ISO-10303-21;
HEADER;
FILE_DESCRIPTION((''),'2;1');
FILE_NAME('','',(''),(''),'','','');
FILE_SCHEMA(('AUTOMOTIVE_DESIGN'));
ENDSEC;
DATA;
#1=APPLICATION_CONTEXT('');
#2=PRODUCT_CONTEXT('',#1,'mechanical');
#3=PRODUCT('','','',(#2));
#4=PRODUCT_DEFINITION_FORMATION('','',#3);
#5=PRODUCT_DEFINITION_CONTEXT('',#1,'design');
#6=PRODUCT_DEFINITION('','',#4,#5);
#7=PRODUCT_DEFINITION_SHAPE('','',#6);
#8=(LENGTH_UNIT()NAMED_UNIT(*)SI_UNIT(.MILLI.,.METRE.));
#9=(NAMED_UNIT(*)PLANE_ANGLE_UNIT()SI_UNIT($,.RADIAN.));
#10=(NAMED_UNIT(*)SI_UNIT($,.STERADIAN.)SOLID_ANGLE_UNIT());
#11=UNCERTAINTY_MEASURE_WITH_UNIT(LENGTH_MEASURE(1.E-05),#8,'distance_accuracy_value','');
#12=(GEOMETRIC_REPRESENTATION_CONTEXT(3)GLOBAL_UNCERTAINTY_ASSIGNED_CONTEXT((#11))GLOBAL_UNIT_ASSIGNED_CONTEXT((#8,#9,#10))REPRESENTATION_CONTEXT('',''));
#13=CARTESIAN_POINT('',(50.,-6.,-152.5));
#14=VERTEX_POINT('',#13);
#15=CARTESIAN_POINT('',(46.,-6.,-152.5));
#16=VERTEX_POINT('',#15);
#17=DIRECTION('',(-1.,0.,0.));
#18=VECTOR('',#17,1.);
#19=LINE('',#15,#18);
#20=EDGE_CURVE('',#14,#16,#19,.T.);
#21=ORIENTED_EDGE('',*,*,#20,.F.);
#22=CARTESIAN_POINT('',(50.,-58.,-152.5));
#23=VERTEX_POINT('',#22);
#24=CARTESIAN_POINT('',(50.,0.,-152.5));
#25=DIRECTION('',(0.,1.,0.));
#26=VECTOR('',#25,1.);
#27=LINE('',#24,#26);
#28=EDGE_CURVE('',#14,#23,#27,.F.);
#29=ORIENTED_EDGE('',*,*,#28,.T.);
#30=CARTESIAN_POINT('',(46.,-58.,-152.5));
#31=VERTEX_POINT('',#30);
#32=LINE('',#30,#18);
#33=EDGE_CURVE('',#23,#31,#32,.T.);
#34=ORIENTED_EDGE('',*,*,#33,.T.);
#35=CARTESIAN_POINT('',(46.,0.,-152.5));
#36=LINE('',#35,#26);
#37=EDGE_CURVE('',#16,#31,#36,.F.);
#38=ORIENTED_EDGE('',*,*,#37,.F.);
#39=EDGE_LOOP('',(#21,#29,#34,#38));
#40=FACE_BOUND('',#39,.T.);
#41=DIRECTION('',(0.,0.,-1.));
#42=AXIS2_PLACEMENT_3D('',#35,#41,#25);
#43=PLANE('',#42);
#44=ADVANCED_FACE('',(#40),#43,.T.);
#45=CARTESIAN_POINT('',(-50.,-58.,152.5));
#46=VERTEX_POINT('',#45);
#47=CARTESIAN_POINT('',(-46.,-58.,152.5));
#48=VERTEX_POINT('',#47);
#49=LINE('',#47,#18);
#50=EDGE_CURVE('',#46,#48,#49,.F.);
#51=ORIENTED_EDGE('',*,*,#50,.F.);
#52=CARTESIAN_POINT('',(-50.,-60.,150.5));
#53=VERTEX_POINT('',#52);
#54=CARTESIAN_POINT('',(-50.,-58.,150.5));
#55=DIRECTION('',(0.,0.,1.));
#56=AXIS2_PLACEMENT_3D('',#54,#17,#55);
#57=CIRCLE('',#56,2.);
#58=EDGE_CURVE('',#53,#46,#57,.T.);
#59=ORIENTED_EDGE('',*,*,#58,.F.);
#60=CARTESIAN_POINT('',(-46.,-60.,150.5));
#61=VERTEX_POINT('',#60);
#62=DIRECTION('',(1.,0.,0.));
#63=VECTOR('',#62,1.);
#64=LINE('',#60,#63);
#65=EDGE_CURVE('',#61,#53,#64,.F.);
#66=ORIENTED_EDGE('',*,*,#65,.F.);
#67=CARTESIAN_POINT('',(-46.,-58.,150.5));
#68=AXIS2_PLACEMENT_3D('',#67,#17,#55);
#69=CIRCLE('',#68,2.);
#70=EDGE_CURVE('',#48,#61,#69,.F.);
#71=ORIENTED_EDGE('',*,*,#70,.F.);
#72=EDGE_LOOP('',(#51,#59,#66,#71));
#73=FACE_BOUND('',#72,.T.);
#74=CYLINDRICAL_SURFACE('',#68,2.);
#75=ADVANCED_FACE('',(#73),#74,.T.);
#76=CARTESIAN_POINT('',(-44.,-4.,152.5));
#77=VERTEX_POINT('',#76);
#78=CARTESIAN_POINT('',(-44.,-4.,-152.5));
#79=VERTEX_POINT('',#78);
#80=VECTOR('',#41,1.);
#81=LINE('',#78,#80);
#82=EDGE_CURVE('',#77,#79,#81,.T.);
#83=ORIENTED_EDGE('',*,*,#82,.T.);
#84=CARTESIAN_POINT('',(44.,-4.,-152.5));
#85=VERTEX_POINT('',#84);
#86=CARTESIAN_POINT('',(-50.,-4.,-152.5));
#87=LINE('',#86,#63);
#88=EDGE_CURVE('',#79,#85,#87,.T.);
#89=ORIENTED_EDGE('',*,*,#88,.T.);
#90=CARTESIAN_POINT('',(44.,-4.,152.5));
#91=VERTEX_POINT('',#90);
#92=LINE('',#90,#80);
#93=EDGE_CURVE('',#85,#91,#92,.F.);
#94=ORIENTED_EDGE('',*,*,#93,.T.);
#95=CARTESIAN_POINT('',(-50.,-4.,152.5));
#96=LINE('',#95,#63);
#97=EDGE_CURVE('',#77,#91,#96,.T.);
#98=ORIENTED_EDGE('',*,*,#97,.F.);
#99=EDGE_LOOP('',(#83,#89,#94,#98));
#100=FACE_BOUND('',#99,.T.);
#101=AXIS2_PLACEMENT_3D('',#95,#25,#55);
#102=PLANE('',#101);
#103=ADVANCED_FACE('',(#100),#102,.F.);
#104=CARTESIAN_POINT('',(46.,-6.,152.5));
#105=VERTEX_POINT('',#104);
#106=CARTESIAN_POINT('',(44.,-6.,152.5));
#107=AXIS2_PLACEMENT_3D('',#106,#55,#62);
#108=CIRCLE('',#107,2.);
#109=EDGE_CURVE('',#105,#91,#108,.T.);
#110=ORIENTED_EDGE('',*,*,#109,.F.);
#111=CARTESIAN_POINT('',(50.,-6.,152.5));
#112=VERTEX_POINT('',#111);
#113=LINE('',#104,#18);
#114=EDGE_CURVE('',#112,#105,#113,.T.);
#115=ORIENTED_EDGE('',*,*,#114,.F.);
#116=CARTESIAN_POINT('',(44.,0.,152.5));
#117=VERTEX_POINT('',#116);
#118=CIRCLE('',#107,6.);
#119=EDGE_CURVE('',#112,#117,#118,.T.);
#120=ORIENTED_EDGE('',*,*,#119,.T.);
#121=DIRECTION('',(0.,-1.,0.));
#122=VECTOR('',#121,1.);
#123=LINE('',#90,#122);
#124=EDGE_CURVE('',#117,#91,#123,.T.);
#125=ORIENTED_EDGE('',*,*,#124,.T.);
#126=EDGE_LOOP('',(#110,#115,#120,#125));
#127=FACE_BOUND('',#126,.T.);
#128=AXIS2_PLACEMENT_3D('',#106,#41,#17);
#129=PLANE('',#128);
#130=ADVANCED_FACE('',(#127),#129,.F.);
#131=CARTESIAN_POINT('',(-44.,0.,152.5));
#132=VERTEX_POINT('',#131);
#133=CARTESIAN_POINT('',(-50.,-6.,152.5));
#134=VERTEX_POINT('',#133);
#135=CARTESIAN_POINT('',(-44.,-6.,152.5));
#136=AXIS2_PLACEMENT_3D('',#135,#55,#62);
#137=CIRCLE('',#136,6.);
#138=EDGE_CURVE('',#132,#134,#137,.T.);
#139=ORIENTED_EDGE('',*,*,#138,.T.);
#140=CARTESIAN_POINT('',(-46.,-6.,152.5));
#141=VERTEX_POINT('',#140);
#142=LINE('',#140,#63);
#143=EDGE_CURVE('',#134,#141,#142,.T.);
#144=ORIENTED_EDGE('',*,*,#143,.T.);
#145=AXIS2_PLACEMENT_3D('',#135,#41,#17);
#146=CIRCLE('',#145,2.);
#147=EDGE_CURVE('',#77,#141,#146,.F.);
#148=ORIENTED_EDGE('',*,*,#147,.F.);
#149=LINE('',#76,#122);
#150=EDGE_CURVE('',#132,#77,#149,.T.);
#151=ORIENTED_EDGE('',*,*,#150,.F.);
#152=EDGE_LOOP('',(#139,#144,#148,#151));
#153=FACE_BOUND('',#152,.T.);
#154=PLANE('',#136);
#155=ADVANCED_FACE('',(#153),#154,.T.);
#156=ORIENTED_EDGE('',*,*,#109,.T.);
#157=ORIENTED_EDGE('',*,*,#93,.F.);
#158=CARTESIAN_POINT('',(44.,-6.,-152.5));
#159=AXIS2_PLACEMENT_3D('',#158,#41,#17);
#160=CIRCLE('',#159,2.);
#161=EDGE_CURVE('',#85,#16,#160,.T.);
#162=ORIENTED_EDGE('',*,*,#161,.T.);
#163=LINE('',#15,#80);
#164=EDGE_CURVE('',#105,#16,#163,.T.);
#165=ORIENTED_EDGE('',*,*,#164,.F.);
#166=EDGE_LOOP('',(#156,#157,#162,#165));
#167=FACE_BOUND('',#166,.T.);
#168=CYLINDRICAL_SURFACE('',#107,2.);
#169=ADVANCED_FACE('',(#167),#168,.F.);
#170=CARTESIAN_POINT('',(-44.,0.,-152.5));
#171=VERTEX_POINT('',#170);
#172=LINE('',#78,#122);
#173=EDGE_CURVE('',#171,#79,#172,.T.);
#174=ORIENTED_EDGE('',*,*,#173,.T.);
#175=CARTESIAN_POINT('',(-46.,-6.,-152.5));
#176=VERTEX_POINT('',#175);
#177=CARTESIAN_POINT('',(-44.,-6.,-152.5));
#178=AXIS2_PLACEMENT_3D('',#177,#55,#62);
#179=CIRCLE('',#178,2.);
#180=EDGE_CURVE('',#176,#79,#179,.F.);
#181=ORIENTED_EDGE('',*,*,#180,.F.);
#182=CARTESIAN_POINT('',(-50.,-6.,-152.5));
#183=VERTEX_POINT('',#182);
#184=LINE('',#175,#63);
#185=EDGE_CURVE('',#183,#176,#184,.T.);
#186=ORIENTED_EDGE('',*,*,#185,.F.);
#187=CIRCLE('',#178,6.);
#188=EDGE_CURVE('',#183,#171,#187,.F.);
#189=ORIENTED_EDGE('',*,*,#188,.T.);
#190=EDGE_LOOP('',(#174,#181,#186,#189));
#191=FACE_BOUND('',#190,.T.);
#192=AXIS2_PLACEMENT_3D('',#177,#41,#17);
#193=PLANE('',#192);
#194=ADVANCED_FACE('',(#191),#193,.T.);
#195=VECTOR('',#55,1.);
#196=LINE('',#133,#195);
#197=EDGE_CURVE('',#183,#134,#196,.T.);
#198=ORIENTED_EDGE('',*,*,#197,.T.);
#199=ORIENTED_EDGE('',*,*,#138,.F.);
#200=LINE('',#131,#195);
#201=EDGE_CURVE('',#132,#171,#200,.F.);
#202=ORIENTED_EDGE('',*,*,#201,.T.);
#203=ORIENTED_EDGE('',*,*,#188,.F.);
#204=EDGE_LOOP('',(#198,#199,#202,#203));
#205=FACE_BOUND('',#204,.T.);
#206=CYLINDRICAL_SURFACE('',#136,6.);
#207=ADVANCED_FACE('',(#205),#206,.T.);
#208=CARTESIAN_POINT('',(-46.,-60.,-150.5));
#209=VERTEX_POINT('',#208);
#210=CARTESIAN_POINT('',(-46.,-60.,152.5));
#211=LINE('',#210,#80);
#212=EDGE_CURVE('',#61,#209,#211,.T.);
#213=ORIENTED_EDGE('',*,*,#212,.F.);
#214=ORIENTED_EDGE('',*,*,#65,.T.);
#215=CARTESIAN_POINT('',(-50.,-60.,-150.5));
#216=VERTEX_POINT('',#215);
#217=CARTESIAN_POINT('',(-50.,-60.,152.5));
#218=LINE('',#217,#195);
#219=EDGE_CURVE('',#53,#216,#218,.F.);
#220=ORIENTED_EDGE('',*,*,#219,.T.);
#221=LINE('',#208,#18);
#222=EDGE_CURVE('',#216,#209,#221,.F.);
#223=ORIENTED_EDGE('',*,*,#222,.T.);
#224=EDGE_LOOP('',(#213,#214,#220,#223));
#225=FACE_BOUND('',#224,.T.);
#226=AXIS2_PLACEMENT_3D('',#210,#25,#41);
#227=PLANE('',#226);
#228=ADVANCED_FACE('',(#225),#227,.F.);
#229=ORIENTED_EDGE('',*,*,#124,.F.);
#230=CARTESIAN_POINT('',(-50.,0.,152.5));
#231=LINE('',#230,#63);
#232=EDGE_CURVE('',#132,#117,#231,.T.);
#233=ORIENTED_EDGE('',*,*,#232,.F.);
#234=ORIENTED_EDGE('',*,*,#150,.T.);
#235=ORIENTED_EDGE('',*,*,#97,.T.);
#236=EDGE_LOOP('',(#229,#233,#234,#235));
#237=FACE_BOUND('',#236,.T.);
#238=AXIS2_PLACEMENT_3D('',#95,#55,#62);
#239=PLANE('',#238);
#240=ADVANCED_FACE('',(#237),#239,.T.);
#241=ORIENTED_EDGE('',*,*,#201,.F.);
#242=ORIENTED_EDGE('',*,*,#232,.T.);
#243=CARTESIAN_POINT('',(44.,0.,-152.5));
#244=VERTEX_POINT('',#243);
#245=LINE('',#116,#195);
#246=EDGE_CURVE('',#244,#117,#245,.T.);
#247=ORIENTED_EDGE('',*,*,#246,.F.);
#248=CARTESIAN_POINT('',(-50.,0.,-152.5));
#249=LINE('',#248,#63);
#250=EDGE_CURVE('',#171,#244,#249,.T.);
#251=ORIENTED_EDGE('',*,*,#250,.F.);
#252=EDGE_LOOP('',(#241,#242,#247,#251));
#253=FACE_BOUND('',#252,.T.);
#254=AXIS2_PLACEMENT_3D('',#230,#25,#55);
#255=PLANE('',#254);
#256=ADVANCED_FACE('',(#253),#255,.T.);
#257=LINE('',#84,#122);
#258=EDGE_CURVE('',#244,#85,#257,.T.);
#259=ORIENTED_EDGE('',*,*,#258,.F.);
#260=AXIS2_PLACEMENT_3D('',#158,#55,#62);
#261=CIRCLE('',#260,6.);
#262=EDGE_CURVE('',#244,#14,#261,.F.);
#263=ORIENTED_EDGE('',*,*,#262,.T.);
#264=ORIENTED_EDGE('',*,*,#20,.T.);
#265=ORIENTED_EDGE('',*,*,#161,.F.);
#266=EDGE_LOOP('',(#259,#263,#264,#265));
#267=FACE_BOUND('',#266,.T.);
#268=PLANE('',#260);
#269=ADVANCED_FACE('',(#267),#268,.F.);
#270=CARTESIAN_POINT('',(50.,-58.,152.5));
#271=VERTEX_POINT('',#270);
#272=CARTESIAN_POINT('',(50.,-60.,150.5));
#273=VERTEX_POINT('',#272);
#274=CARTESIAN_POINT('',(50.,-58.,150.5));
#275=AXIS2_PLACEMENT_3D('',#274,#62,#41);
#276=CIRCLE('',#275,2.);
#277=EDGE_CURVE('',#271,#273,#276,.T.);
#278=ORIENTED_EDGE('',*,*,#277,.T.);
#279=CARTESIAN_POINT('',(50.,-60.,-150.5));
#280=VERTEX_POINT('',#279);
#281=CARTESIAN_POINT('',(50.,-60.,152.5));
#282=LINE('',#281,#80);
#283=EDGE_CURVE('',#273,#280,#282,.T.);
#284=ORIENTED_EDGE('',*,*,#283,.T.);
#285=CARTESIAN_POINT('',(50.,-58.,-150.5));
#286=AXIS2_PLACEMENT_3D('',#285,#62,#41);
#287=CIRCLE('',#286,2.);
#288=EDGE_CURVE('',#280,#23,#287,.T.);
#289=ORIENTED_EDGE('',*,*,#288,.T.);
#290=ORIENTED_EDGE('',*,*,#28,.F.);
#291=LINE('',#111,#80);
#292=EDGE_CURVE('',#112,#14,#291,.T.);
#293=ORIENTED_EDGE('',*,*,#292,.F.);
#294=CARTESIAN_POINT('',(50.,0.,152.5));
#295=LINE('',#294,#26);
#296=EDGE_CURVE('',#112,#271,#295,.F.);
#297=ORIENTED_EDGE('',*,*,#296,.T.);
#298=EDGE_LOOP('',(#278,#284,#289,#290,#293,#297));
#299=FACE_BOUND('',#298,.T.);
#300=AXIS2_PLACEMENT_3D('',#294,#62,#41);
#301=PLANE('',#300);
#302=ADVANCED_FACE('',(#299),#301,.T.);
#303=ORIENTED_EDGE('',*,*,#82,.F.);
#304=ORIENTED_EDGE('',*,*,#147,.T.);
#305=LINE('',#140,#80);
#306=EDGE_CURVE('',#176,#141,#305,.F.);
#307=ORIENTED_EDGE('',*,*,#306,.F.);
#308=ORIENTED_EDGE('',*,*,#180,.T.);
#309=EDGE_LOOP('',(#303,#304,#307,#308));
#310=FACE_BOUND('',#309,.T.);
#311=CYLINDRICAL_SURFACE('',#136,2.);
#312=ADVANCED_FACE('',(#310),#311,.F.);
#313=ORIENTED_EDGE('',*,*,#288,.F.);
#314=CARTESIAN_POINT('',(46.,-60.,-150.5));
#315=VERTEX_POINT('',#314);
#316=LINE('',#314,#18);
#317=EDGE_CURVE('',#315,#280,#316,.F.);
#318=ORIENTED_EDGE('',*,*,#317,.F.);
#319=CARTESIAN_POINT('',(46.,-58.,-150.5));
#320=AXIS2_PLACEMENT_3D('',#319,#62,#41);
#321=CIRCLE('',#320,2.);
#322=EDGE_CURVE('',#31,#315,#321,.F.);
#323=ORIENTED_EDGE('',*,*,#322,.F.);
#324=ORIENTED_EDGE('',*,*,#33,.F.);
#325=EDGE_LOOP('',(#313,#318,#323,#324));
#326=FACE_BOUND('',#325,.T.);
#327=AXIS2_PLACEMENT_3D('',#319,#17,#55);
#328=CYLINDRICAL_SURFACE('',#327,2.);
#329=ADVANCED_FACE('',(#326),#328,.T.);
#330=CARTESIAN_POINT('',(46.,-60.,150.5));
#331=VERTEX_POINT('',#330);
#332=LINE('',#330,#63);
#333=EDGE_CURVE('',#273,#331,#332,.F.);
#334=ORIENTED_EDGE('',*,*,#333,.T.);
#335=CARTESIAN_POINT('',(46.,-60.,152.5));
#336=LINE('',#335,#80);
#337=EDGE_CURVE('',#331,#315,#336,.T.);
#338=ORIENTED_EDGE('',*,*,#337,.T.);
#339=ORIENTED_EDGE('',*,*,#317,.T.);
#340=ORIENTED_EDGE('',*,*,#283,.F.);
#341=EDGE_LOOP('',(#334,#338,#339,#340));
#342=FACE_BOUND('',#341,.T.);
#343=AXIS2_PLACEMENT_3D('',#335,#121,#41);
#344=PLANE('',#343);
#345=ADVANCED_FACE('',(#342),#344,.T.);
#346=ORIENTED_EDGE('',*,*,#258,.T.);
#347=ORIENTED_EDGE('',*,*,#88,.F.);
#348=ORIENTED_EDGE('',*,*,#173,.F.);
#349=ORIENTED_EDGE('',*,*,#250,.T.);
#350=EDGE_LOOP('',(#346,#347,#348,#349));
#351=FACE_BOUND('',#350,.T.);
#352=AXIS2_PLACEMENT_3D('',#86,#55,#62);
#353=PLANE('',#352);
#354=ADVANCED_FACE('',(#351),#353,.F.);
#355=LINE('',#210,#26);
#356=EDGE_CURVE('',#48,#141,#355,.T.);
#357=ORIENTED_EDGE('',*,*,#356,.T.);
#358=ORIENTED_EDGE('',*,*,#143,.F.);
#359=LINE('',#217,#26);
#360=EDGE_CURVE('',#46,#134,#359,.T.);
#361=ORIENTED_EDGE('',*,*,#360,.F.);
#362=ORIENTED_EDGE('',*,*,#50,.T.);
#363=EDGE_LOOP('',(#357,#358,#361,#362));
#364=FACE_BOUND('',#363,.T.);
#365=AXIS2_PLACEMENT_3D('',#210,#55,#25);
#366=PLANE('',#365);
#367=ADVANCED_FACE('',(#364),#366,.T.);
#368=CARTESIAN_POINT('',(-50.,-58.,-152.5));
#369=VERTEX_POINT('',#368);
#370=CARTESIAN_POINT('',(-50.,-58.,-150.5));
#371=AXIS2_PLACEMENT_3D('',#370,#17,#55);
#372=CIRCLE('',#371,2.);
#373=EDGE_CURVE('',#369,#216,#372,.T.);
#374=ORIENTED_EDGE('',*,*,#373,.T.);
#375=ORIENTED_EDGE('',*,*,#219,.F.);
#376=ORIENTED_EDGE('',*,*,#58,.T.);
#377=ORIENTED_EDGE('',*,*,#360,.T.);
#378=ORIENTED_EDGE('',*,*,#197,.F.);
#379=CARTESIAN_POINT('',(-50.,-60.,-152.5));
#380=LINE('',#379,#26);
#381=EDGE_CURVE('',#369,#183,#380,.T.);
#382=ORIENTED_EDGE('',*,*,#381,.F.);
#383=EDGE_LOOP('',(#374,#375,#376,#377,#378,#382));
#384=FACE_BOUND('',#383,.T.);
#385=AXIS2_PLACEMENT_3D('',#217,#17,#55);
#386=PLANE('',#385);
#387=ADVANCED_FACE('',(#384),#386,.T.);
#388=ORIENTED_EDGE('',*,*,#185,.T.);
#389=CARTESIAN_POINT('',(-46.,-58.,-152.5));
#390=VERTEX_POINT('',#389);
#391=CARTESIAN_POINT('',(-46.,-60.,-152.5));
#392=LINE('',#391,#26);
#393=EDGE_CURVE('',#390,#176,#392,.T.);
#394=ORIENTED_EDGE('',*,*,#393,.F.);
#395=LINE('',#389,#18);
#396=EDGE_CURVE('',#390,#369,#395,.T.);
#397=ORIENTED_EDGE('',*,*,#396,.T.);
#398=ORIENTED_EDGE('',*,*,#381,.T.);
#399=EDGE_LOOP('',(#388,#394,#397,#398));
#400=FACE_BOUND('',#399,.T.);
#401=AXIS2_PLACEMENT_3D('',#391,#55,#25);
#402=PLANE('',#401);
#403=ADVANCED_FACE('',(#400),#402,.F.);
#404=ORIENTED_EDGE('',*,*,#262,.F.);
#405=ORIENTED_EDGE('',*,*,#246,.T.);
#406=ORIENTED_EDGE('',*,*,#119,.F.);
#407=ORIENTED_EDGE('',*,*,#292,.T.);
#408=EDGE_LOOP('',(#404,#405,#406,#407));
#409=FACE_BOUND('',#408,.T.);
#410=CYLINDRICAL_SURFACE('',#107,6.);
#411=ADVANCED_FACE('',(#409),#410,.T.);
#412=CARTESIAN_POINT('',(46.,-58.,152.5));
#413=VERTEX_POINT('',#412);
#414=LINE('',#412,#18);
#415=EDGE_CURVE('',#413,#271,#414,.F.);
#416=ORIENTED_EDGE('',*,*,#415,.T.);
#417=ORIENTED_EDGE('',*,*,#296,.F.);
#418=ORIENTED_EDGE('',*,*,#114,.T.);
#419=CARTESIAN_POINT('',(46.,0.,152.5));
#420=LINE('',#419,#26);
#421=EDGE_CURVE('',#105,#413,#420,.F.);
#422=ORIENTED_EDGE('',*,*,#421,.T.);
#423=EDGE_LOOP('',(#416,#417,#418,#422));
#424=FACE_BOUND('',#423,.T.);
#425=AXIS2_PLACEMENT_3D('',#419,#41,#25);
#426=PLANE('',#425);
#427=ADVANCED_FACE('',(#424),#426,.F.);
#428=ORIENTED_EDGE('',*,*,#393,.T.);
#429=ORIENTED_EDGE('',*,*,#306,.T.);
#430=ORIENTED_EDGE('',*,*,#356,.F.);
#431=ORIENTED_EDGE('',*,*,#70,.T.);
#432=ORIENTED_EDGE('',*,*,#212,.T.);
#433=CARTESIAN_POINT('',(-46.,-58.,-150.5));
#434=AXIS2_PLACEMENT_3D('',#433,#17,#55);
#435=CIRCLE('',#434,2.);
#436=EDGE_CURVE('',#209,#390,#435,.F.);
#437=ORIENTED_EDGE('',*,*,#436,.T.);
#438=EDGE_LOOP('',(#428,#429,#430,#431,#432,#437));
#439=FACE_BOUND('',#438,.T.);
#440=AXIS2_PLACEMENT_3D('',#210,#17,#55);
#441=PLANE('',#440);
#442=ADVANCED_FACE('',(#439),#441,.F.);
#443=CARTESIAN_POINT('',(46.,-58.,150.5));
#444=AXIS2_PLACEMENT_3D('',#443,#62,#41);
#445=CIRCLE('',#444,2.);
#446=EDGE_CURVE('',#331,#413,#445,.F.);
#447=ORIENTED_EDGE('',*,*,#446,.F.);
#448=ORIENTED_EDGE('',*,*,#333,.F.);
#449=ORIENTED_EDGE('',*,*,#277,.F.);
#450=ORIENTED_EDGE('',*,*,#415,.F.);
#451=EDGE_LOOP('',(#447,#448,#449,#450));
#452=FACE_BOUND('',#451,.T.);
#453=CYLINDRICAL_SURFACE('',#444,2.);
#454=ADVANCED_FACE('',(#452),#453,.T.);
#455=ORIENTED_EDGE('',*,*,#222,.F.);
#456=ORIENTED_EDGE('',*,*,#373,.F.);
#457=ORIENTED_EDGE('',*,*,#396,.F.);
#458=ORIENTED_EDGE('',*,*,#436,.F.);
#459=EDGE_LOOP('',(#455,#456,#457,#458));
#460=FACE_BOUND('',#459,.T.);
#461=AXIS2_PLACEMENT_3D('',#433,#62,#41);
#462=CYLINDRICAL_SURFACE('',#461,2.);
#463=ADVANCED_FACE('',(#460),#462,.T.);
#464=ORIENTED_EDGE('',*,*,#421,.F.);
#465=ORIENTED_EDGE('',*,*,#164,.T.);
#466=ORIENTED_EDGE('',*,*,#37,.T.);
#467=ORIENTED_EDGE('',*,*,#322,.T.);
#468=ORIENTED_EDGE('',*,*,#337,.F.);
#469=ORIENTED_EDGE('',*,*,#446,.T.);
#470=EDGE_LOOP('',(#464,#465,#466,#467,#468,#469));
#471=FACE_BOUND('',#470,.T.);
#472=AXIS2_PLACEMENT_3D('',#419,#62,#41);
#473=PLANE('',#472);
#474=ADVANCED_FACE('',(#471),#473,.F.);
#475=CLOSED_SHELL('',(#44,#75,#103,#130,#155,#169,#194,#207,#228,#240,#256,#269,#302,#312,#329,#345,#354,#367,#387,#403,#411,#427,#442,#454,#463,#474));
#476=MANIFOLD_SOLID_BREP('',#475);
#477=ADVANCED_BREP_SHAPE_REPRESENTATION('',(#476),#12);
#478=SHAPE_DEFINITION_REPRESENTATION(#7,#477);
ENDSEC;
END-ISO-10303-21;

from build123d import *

# Parameters (mm, degrees)
EXTRUDE_THIN1_DEPTH    = 152.5
CONVERT_SOLID1_START   = -152.5
CONVERT_SOLID1_DEPTH   = 305
CONVERT_SOLID1_2_DEPTH = 305
FILLET1_R              = 2


# Read off the part's stored shape, not the designer's step: Convert-Solid1
with BuildPart() as part:
    # Sketch1 → Extrude-Thin1 (new, symmetric)
    with BuildSketch(Plane.XY):
        Polygon((-50, -60), (-50, 0), (50, 0), (50, -60), (46, -60), (46, -4), (-46, -4), (-46, -60), align=None)
    extrude(amount=EXTRUDE_THIN1_DEPTH, both=True)

    # Convert-Solid1 outline → Convert-Solid1 (cut)
    with BuildSketch(Plane.XY.offset(CONVERT_SOLID1_START)):
        with BuildLine():
            Line((50, 0), (44, 0))
            ThreePointArc((44, 0), (48.242640687, -1.757359313), (50, -6))
            Line((50, -6), (50, 0))
        make_face()
        with BuildLine():
            ThreePointArc((-50, -6), (-48.242640687, -1.757359313), (-44, 0))
            Line((-44, 0), (-50, 0))
            Line((-50, 0), (-50, -6))
        make_face()
    extrude(amount=CONVERT_SOLID1_DEPTH, mode=Mode.SUBTRACT)

    # Convert-Solid1 2 outline → Convert-Solid1 2 (add)
    with BuildSketch(Plane.XY.offset(CONVERT_SOLID1_START)):
        with BuildLine():
            Line((46, -4), (44, -4))
            ThreePointArc((44, -4), (45.414213562, -4.585786438), (46, -6))
            Line((46, -6), (46, -4))
        make_face()
        with BuildLine():
            ThreePointArc((-46, -6), (-45.414213562, -4.585786438), (-44, -4))
            Line((-44, -4), (-46, -4))
            Line((-46, -4), (-46, -6))
        make_face()
    extrude(amount=CONVERT_SOLID1_2_DEPTH)

    # Fillet1
    fillet1_edges = [part.edges().sort_by_distance(p)[0] for p in [
        (48, -60, 152.5),
        (48, -60, -152.5),
        (-48, -60, -152.5),
        (-48, -60, 152.5),
    ]]
    fillet(fillet1_edges, radius=FILLET1_R)


solid = part.part
